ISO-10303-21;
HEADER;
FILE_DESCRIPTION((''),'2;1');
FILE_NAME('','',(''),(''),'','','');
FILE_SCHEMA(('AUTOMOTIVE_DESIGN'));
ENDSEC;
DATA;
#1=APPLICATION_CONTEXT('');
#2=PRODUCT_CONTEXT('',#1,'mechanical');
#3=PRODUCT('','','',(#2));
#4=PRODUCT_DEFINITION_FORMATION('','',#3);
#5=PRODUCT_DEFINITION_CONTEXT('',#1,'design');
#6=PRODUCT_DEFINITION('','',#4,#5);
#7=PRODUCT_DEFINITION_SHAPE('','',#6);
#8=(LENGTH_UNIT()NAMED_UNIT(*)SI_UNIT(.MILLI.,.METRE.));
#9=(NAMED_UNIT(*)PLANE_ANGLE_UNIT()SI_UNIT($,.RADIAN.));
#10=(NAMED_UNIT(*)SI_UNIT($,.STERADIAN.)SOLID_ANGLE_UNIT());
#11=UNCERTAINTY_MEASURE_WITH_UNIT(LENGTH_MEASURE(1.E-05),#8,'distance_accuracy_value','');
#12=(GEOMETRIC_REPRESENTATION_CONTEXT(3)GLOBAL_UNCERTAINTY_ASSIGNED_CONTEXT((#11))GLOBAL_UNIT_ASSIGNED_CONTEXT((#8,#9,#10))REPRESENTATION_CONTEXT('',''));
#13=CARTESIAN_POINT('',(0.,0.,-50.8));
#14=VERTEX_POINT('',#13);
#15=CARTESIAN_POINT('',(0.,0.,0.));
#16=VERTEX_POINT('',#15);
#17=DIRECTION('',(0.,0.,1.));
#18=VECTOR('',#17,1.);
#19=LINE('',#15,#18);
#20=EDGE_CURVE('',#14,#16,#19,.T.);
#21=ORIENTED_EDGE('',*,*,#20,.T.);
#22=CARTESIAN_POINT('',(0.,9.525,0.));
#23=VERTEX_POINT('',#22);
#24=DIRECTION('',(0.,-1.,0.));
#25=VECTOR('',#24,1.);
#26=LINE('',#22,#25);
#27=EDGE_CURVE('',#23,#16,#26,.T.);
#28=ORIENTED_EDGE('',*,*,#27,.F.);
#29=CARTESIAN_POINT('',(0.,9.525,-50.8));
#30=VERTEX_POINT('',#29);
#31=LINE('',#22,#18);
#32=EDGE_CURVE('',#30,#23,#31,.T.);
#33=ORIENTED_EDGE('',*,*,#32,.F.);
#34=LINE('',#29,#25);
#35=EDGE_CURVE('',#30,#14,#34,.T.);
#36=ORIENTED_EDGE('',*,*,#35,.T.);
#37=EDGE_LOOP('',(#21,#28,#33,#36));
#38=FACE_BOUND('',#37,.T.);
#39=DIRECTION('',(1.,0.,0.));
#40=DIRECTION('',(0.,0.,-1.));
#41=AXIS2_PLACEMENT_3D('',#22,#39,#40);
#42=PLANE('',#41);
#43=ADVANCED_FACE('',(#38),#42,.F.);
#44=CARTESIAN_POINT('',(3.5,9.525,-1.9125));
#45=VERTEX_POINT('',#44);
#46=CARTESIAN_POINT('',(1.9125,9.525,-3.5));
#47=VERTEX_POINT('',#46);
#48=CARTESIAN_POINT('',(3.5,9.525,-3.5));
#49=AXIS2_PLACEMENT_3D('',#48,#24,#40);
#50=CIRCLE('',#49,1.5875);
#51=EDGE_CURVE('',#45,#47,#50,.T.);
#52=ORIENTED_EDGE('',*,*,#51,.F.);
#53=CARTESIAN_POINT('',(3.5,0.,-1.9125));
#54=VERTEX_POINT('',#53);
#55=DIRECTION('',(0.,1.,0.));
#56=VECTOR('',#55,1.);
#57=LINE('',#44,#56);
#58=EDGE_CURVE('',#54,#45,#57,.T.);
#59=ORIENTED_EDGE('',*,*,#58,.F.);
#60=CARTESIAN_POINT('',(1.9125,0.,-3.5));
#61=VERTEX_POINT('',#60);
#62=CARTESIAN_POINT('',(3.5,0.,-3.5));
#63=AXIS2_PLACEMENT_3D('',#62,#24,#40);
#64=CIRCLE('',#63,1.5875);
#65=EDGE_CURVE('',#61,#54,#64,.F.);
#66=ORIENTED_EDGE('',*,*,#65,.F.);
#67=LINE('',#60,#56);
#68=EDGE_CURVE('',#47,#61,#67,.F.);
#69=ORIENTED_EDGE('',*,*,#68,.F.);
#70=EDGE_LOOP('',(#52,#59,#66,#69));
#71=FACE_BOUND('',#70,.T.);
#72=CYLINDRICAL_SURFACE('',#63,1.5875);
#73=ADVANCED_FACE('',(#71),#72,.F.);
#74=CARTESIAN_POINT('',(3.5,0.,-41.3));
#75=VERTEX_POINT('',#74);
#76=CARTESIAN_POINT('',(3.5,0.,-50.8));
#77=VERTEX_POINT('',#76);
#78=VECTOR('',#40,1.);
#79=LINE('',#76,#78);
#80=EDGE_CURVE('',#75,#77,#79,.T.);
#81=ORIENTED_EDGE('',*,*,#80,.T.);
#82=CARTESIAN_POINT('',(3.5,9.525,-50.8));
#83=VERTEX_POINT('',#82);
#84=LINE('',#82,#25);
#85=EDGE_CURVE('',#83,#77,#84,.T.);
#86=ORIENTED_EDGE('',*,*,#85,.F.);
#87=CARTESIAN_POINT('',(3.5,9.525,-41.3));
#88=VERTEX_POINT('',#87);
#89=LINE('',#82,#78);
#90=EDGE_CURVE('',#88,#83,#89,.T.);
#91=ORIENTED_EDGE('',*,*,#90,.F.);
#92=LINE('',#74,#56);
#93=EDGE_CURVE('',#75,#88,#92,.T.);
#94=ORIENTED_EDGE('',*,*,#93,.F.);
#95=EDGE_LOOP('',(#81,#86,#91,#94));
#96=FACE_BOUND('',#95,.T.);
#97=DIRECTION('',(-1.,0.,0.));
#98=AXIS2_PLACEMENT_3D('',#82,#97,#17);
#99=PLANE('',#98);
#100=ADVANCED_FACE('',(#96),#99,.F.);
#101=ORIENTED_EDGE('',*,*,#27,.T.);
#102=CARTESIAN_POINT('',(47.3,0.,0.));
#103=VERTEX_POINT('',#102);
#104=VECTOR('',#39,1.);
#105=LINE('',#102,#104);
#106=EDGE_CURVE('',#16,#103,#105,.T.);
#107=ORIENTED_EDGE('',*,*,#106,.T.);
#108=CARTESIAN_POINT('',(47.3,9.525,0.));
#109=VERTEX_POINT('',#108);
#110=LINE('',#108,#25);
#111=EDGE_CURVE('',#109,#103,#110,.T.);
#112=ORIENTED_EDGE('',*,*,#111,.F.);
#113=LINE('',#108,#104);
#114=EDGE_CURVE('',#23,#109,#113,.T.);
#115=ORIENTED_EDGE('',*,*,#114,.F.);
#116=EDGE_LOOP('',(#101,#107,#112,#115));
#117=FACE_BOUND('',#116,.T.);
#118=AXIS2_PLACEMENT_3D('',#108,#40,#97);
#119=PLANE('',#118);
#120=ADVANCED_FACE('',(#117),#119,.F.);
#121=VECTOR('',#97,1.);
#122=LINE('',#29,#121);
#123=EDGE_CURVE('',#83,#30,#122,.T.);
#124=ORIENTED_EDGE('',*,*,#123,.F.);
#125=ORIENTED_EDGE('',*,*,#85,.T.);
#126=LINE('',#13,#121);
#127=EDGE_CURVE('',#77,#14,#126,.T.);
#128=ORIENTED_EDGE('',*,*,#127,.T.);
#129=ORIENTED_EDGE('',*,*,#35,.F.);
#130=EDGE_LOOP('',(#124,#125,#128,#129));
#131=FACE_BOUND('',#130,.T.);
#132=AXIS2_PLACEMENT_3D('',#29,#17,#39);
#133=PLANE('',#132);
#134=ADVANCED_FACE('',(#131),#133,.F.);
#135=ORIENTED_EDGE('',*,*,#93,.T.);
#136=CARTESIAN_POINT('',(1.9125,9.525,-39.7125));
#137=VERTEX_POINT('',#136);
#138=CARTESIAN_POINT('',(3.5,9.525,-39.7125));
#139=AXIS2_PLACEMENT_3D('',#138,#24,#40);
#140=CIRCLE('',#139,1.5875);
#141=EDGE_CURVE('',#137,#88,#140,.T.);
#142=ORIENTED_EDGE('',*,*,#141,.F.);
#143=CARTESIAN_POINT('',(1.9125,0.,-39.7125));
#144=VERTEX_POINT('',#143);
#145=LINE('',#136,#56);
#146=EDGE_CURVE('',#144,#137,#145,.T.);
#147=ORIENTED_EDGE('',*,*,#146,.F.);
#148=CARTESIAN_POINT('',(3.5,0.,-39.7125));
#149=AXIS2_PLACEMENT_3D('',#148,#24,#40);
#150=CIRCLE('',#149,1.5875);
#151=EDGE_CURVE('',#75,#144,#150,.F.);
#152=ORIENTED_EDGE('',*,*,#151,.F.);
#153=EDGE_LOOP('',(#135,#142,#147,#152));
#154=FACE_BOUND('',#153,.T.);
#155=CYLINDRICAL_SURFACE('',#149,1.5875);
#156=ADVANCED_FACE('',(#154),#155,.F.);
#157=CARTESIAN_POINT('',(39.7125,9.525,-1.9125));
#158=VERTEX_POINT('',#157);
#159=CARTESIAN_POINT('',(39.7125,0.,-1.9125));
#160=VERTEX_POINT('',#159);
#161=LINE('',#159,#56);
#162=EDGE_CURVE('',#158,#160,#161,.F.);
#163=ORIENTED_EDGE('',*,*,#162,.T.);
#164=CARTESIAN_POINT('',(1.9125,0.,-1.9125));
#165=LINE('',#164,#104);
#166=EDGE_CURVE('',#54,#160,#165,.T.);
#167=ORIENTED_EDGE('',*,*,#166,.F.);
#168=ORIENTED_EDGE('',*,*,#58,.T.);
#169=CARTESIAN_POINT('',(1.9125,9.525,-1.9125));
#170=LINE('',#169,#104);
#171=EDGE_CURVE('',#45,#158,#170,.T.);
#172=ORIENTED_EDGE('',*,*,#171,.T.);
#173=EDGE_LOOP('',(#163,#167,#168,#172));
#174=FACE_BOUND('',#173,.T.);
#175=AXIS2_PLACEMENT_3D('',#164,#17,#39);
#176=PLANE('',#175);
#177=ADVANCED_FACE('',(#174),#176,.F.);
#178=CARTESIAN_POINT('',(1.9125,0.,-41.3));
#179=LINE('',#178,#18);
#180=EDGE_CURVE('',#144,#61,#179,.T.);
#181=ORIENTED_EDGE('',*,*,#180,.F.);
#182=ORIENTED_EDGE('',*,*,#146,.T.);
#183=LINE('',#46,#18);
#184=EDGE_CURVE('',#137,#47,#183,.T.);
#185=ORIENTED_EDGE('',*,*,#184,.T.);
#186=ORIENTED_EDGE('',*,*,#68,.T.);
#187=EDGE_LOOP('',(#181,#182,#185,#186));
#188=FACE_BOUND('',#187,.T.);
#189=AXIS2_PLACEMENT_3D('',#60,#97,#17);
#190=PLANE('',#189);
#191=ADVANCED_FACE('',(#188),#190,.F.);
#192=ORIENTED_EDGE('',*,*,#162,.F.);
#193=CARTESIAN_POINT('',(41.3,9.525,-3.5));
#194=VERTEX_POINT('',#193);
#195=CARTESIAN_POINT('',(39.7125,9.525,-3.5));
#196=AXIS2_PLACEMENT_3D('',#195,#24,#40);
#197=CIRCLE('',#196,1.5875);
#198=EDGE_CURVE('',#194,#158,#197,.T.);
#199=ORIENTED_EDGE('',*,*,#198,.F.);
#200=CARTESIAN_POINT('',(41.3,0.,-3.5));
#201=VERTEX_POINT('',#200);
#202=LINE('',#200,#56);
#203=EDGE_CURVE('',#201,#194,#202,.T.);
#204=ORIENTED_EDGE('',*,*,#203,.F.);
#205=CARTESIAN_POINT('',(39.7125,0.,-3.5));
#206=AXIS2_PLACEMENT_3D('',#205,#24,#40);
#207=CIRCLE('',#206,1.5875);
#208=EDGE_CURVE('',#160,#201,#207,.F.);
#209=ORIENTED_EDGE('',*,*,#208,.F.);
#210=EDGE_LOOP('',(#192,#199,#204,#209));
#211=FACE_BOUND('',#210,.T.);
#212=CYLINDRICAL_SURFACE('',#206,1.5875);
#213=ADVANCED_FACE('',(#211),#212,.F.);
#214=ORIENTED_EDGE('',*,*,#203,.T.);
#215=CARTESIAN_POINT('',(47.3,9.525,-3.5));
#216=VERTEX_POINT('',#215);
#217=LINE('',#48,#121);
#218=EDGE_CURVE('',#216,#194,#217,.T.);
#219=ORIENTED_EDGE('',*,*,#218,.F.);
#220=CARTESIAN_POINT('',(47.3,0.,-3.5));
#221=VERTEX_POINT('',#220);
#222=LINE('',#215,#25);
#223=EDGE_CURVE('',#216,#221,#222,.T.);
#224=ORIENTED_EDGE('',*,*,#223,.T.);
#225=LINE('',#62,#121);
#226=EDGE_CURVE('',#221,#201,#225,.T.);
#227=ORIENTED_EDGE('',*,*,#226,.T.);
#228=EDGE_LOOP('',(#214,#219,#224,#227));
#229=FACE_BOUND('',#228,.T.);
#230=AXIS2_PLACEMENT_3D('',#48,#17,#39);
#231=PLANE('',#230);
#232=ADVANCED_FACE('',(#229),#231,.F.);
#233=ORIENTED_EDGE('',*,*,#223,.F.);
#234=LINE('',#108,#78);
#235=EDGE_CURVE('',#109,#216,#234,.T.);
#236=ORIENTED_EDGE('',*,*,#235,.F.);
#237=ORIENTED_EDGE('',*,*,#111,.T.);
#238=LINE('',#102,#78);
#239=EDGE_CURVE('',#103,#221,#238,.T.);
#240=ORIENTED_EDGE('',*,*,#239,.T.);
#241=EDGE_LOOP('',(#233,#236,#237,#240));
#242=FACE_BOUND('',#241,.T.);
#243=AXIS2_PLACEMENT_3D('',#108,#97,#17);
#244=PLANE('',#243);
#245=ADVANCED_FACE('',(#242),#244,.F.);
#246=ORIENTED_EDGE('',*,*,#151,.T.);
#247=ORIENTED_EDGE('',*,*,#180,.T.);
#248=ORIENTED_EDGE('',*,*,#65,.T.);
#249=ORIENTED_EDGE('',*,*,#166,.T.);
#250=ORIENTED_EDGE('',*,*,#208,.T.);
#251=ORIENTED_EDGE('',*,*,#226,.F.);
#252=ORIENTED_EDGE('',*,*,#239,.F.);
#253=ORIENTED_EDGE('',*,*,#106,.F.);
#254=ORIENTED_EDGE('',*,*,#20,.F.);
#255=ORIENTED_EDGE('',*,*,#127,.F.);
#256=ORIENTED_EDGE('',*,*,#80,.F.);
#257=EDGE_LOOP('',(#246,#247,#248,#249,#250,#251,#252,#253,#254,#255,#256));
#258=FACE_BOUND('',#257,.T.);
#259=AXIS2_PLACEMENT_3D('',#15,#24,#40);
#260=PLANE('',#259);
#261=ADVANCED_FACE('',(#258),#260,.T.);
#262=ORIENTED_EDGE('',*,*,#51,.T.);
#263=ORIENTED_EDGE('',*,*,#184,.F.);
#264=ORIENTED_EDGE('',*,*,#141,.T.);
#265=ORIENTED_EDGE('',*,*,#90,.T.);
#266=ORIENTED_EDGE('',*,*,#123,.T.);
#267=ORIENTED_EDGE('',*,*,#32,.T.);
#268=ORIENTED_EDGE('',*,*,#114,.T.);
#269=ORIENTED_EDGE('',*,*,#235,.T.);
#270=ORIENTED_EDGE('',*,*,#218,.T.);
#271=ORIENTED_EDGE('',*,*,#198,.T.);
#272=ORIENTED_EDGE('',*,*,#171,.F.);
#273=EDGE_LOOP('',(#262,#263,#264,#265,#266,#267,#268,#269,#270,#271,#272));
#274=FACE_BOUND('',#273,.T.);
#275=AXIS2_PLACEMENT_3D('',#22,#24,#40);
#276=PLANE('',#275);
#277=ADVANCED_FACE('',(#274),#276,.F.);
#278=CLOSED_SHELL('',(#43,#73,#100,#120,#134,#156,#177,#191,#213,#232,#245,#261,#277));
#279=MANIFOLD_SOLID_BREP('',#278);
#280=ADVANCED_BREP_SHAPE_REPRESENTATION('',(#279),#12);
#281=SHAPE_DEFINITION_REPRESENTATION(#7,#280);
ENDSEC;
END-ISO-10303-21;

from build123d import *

# Parameters (mm, degrees)
BOSS_EXTRUDE1_DEPTH = 9.525
CUT_EXTRUDE1_DEPTH  = 71.061798614
FILLET1_R           = 1.5875


with BuildPart() as part:
    # Sketch1 → Boss-Extrude1 (new body)
    with BuildSketch(Plane(origin=(0, 0, 0), x_dir=(1, 0, 0), z_dir=(0, 1, 0))):
        Polygon((0, 0), (0, 50.8), (3.5, 50.8), (3.5, 3.5), (47.3, 3.5), (47.3, 0), align=None)
    extrude(amount=BOSS_EXTRUDE1_DEPTH)

    # Sketch2 → Cut-Extrude1 (cut, through all)
    with BuildSketch(Plane(origin=(0, 9.525, 0), x_dir=(1, 0, 0), z_dir=(0, 1, 0))):
        Polygon((3.5, 41.3), (1.9125, 41.3), (1.9125, 3.5), (1.9125, 1.9125), (41.3, 1.9125), (41.3, 3.5), (3.5, 3.5), align=None)
    extrude(amount=-CUT_EXTRUDE1_DEPTH, mode=Mode.SUBTRACT)

    # Fillet1
    fillet1_edges = [part.edges().sort_by_distance(p)[0] for p in [
        (41.3, 4.7625, -1.9125),
        (1.9125, 4.7625, -1.9125),
        (1.9125, 4.7625, -41.3),
    ]]
    fillet(fillet1_edges, radius=FILLET1_R - 0.0001)  # a hair under: the kernel refuses the full size


solid = part.part
